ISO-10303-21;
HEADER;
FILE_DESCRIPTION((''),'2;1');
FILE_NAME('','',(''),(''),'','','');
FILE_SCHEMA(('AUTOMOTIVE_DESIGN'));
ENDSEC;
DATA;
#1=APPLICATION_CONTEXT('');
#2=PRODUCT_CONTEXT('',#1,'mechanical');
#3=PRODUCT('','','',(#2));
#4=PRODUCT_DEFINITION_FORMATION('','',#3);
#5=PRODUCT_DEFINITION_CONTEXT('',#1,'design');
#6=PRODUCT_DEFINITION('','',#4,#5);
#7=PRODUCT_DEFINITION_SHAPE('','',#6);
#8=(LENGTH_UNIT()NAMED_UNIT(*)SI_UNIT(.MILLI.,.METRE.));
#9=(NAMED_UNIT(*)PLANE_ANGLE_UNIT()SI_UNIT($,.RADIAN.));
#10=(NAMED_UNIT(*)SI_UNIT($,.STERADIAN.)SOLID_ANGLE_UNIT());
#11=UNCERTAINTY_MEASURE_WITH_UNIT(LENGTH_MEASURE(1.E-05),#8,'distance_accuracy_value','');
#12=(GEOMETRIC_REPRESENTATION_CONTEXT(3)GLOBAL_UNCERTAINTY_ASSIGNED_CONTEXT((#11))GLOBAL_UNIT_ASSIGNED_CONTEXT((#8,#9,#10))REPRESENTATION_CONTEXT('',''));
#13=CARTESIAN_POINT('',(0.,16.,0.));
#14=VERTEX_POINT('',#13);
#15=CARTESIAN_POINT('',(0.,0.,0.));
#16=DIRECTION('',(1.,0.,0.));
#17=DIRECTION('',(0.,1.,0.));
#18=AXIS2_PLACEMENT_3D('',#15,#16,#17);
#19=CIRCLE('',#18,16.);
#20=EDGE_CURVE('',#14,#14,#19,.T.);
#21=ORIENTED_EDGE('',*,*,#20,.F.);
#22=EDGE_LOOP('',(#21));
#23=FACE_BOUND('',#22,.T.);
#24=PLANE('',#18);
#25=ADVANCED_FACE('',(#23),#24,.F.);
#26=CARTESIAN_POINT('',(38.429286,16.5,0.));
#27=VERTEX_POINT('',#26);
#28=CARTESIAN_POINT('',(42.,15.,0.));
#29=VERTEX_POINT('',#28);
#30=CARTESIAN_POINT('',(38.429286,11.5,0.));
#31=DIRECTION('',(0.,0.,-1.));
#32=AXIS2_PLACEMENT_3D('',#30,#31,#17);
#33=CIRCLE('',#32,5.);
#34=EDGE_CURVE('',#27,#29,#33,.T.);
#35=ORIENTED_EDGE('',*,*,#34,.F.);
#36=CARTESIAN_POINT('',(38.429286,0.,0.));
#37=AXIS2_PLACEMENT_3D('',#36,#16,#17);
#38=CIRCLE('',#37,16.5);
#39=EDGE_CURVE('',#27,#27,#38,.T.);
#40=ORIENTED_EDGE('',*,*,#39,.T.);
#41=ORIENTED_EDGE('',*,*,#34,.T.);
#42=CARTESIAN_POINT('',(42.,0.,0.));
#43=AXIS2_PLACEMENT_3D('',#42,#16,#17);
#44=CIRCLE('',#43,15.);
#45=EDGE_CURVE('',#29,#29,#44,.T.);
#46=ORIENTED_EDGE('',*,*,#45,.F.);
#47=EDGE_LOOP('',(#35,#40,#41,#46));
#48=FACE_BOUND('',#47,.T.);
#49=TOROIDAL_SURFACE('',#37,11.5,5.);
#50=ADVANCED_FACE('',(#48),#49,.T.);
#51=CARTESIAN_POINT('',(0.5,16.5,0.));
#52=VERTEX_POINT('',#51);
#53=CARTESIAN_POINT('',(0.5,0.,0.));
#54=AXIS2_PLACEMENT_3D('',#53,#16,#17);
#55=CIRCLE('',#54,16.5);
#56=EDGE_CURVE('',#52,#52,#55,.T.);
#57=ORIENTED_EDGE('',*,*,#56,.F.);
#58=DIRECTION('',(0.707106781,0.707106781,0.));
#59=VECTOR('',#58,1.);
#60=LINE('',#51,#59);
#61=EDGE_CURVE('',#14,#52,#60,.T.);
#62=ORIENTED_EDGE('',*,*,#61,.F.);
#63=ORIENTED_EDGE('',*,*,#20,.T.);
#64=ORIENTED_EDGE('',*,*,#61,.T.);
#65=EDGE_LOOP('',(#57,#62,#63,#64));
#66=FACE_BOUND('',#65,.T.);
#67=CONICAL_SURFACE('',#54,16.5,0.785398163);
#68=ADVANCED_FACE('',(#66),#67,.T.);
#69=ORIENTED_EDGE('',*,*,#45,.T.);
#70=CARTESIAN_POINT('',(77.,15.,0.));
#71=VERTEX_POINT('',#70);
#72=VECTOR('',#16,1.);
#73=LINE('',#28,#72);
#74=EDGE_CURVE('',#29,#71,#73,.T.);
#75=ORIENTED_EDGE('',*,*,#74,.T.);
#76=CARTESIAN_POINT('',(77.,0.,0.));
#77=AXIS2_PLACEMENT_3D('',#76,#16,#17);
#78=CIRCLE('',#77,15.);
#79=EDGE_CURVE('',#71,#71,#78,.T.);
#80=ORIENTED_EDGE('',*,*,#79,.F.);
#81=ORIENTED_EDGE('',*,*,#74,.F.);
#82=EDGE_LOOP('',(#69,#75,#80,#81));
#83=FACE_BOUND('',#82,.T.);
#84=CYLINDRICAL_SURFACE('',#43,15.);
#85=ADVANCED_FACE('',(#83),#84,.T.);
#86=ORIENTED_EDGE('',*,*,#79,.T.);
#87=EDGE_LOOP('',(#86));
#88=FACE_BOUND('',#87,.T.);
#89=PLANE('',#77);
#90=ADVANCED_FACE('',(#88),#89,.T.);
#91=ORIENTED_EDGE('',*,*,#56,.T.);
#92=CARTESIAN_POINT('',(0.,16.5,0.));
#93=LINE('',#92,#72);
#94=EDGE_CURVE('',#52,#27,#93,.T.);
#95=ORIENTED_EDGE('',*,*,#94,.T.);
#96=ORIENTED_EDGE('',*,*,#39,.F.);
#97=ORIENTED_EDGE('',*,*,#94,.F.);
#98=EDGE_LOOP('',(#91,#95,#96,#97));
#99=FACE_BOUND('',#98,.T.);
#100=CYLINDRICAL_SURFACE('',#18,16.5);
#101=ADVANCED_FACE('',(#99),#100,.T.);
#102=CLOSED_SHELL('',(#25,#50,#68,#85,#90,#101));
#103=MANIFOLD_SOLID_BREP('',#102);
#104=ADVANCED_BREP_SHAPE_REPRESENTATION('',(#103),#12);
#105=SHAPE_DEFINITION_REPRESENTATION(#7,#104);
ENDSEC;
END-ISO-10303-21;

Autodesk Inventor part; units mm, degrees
ref_plane "Start Plane" through (0, 0, 0) normal (1, 0, 0) x (0, 1, 0)
ref_plane "XZ Plane" through (0, 0, 0) normal (0, 1, 0) x (-1, 0, 0)
ref_plane "XY Plane" through (0, 0, 0) normal (0, 0, 1) x (1, 0, 0)
sketch "Main Sketch" plane through (0, 0, 0) normal (0, 0, 1) x (1, 0, 0)
  line L0 (0, 0) -> (77, 0)
  line L1 (0, 0) -> (0, 16.5)
  line L2 (42, 16.5) -> (42, 15)
  line L3 (0, 16.5) -> (42, 16.5)
  line L4 (77, 15) -> (77, 0)
  line L5 (42, 15) -> (77, 15)
  dimension "d3" = 33
  dimension "d4" = 30
revolve "Revolution1" add sketch "Main Sketch" angle 360 about axis through (0, 0, 0) along (1, 0, 0)
chamfer "Chamfer1" distance 0.5 angle 45 1 edges at (0, -16.5, 0) measured on face at (28, 16.4465, -1.3277)
fillet "Fillet1" radius 5 1 edges at (42, -16.5, 0)
equation "\"Length\" = 77"
properties part number "Shaft" material "Steel"
